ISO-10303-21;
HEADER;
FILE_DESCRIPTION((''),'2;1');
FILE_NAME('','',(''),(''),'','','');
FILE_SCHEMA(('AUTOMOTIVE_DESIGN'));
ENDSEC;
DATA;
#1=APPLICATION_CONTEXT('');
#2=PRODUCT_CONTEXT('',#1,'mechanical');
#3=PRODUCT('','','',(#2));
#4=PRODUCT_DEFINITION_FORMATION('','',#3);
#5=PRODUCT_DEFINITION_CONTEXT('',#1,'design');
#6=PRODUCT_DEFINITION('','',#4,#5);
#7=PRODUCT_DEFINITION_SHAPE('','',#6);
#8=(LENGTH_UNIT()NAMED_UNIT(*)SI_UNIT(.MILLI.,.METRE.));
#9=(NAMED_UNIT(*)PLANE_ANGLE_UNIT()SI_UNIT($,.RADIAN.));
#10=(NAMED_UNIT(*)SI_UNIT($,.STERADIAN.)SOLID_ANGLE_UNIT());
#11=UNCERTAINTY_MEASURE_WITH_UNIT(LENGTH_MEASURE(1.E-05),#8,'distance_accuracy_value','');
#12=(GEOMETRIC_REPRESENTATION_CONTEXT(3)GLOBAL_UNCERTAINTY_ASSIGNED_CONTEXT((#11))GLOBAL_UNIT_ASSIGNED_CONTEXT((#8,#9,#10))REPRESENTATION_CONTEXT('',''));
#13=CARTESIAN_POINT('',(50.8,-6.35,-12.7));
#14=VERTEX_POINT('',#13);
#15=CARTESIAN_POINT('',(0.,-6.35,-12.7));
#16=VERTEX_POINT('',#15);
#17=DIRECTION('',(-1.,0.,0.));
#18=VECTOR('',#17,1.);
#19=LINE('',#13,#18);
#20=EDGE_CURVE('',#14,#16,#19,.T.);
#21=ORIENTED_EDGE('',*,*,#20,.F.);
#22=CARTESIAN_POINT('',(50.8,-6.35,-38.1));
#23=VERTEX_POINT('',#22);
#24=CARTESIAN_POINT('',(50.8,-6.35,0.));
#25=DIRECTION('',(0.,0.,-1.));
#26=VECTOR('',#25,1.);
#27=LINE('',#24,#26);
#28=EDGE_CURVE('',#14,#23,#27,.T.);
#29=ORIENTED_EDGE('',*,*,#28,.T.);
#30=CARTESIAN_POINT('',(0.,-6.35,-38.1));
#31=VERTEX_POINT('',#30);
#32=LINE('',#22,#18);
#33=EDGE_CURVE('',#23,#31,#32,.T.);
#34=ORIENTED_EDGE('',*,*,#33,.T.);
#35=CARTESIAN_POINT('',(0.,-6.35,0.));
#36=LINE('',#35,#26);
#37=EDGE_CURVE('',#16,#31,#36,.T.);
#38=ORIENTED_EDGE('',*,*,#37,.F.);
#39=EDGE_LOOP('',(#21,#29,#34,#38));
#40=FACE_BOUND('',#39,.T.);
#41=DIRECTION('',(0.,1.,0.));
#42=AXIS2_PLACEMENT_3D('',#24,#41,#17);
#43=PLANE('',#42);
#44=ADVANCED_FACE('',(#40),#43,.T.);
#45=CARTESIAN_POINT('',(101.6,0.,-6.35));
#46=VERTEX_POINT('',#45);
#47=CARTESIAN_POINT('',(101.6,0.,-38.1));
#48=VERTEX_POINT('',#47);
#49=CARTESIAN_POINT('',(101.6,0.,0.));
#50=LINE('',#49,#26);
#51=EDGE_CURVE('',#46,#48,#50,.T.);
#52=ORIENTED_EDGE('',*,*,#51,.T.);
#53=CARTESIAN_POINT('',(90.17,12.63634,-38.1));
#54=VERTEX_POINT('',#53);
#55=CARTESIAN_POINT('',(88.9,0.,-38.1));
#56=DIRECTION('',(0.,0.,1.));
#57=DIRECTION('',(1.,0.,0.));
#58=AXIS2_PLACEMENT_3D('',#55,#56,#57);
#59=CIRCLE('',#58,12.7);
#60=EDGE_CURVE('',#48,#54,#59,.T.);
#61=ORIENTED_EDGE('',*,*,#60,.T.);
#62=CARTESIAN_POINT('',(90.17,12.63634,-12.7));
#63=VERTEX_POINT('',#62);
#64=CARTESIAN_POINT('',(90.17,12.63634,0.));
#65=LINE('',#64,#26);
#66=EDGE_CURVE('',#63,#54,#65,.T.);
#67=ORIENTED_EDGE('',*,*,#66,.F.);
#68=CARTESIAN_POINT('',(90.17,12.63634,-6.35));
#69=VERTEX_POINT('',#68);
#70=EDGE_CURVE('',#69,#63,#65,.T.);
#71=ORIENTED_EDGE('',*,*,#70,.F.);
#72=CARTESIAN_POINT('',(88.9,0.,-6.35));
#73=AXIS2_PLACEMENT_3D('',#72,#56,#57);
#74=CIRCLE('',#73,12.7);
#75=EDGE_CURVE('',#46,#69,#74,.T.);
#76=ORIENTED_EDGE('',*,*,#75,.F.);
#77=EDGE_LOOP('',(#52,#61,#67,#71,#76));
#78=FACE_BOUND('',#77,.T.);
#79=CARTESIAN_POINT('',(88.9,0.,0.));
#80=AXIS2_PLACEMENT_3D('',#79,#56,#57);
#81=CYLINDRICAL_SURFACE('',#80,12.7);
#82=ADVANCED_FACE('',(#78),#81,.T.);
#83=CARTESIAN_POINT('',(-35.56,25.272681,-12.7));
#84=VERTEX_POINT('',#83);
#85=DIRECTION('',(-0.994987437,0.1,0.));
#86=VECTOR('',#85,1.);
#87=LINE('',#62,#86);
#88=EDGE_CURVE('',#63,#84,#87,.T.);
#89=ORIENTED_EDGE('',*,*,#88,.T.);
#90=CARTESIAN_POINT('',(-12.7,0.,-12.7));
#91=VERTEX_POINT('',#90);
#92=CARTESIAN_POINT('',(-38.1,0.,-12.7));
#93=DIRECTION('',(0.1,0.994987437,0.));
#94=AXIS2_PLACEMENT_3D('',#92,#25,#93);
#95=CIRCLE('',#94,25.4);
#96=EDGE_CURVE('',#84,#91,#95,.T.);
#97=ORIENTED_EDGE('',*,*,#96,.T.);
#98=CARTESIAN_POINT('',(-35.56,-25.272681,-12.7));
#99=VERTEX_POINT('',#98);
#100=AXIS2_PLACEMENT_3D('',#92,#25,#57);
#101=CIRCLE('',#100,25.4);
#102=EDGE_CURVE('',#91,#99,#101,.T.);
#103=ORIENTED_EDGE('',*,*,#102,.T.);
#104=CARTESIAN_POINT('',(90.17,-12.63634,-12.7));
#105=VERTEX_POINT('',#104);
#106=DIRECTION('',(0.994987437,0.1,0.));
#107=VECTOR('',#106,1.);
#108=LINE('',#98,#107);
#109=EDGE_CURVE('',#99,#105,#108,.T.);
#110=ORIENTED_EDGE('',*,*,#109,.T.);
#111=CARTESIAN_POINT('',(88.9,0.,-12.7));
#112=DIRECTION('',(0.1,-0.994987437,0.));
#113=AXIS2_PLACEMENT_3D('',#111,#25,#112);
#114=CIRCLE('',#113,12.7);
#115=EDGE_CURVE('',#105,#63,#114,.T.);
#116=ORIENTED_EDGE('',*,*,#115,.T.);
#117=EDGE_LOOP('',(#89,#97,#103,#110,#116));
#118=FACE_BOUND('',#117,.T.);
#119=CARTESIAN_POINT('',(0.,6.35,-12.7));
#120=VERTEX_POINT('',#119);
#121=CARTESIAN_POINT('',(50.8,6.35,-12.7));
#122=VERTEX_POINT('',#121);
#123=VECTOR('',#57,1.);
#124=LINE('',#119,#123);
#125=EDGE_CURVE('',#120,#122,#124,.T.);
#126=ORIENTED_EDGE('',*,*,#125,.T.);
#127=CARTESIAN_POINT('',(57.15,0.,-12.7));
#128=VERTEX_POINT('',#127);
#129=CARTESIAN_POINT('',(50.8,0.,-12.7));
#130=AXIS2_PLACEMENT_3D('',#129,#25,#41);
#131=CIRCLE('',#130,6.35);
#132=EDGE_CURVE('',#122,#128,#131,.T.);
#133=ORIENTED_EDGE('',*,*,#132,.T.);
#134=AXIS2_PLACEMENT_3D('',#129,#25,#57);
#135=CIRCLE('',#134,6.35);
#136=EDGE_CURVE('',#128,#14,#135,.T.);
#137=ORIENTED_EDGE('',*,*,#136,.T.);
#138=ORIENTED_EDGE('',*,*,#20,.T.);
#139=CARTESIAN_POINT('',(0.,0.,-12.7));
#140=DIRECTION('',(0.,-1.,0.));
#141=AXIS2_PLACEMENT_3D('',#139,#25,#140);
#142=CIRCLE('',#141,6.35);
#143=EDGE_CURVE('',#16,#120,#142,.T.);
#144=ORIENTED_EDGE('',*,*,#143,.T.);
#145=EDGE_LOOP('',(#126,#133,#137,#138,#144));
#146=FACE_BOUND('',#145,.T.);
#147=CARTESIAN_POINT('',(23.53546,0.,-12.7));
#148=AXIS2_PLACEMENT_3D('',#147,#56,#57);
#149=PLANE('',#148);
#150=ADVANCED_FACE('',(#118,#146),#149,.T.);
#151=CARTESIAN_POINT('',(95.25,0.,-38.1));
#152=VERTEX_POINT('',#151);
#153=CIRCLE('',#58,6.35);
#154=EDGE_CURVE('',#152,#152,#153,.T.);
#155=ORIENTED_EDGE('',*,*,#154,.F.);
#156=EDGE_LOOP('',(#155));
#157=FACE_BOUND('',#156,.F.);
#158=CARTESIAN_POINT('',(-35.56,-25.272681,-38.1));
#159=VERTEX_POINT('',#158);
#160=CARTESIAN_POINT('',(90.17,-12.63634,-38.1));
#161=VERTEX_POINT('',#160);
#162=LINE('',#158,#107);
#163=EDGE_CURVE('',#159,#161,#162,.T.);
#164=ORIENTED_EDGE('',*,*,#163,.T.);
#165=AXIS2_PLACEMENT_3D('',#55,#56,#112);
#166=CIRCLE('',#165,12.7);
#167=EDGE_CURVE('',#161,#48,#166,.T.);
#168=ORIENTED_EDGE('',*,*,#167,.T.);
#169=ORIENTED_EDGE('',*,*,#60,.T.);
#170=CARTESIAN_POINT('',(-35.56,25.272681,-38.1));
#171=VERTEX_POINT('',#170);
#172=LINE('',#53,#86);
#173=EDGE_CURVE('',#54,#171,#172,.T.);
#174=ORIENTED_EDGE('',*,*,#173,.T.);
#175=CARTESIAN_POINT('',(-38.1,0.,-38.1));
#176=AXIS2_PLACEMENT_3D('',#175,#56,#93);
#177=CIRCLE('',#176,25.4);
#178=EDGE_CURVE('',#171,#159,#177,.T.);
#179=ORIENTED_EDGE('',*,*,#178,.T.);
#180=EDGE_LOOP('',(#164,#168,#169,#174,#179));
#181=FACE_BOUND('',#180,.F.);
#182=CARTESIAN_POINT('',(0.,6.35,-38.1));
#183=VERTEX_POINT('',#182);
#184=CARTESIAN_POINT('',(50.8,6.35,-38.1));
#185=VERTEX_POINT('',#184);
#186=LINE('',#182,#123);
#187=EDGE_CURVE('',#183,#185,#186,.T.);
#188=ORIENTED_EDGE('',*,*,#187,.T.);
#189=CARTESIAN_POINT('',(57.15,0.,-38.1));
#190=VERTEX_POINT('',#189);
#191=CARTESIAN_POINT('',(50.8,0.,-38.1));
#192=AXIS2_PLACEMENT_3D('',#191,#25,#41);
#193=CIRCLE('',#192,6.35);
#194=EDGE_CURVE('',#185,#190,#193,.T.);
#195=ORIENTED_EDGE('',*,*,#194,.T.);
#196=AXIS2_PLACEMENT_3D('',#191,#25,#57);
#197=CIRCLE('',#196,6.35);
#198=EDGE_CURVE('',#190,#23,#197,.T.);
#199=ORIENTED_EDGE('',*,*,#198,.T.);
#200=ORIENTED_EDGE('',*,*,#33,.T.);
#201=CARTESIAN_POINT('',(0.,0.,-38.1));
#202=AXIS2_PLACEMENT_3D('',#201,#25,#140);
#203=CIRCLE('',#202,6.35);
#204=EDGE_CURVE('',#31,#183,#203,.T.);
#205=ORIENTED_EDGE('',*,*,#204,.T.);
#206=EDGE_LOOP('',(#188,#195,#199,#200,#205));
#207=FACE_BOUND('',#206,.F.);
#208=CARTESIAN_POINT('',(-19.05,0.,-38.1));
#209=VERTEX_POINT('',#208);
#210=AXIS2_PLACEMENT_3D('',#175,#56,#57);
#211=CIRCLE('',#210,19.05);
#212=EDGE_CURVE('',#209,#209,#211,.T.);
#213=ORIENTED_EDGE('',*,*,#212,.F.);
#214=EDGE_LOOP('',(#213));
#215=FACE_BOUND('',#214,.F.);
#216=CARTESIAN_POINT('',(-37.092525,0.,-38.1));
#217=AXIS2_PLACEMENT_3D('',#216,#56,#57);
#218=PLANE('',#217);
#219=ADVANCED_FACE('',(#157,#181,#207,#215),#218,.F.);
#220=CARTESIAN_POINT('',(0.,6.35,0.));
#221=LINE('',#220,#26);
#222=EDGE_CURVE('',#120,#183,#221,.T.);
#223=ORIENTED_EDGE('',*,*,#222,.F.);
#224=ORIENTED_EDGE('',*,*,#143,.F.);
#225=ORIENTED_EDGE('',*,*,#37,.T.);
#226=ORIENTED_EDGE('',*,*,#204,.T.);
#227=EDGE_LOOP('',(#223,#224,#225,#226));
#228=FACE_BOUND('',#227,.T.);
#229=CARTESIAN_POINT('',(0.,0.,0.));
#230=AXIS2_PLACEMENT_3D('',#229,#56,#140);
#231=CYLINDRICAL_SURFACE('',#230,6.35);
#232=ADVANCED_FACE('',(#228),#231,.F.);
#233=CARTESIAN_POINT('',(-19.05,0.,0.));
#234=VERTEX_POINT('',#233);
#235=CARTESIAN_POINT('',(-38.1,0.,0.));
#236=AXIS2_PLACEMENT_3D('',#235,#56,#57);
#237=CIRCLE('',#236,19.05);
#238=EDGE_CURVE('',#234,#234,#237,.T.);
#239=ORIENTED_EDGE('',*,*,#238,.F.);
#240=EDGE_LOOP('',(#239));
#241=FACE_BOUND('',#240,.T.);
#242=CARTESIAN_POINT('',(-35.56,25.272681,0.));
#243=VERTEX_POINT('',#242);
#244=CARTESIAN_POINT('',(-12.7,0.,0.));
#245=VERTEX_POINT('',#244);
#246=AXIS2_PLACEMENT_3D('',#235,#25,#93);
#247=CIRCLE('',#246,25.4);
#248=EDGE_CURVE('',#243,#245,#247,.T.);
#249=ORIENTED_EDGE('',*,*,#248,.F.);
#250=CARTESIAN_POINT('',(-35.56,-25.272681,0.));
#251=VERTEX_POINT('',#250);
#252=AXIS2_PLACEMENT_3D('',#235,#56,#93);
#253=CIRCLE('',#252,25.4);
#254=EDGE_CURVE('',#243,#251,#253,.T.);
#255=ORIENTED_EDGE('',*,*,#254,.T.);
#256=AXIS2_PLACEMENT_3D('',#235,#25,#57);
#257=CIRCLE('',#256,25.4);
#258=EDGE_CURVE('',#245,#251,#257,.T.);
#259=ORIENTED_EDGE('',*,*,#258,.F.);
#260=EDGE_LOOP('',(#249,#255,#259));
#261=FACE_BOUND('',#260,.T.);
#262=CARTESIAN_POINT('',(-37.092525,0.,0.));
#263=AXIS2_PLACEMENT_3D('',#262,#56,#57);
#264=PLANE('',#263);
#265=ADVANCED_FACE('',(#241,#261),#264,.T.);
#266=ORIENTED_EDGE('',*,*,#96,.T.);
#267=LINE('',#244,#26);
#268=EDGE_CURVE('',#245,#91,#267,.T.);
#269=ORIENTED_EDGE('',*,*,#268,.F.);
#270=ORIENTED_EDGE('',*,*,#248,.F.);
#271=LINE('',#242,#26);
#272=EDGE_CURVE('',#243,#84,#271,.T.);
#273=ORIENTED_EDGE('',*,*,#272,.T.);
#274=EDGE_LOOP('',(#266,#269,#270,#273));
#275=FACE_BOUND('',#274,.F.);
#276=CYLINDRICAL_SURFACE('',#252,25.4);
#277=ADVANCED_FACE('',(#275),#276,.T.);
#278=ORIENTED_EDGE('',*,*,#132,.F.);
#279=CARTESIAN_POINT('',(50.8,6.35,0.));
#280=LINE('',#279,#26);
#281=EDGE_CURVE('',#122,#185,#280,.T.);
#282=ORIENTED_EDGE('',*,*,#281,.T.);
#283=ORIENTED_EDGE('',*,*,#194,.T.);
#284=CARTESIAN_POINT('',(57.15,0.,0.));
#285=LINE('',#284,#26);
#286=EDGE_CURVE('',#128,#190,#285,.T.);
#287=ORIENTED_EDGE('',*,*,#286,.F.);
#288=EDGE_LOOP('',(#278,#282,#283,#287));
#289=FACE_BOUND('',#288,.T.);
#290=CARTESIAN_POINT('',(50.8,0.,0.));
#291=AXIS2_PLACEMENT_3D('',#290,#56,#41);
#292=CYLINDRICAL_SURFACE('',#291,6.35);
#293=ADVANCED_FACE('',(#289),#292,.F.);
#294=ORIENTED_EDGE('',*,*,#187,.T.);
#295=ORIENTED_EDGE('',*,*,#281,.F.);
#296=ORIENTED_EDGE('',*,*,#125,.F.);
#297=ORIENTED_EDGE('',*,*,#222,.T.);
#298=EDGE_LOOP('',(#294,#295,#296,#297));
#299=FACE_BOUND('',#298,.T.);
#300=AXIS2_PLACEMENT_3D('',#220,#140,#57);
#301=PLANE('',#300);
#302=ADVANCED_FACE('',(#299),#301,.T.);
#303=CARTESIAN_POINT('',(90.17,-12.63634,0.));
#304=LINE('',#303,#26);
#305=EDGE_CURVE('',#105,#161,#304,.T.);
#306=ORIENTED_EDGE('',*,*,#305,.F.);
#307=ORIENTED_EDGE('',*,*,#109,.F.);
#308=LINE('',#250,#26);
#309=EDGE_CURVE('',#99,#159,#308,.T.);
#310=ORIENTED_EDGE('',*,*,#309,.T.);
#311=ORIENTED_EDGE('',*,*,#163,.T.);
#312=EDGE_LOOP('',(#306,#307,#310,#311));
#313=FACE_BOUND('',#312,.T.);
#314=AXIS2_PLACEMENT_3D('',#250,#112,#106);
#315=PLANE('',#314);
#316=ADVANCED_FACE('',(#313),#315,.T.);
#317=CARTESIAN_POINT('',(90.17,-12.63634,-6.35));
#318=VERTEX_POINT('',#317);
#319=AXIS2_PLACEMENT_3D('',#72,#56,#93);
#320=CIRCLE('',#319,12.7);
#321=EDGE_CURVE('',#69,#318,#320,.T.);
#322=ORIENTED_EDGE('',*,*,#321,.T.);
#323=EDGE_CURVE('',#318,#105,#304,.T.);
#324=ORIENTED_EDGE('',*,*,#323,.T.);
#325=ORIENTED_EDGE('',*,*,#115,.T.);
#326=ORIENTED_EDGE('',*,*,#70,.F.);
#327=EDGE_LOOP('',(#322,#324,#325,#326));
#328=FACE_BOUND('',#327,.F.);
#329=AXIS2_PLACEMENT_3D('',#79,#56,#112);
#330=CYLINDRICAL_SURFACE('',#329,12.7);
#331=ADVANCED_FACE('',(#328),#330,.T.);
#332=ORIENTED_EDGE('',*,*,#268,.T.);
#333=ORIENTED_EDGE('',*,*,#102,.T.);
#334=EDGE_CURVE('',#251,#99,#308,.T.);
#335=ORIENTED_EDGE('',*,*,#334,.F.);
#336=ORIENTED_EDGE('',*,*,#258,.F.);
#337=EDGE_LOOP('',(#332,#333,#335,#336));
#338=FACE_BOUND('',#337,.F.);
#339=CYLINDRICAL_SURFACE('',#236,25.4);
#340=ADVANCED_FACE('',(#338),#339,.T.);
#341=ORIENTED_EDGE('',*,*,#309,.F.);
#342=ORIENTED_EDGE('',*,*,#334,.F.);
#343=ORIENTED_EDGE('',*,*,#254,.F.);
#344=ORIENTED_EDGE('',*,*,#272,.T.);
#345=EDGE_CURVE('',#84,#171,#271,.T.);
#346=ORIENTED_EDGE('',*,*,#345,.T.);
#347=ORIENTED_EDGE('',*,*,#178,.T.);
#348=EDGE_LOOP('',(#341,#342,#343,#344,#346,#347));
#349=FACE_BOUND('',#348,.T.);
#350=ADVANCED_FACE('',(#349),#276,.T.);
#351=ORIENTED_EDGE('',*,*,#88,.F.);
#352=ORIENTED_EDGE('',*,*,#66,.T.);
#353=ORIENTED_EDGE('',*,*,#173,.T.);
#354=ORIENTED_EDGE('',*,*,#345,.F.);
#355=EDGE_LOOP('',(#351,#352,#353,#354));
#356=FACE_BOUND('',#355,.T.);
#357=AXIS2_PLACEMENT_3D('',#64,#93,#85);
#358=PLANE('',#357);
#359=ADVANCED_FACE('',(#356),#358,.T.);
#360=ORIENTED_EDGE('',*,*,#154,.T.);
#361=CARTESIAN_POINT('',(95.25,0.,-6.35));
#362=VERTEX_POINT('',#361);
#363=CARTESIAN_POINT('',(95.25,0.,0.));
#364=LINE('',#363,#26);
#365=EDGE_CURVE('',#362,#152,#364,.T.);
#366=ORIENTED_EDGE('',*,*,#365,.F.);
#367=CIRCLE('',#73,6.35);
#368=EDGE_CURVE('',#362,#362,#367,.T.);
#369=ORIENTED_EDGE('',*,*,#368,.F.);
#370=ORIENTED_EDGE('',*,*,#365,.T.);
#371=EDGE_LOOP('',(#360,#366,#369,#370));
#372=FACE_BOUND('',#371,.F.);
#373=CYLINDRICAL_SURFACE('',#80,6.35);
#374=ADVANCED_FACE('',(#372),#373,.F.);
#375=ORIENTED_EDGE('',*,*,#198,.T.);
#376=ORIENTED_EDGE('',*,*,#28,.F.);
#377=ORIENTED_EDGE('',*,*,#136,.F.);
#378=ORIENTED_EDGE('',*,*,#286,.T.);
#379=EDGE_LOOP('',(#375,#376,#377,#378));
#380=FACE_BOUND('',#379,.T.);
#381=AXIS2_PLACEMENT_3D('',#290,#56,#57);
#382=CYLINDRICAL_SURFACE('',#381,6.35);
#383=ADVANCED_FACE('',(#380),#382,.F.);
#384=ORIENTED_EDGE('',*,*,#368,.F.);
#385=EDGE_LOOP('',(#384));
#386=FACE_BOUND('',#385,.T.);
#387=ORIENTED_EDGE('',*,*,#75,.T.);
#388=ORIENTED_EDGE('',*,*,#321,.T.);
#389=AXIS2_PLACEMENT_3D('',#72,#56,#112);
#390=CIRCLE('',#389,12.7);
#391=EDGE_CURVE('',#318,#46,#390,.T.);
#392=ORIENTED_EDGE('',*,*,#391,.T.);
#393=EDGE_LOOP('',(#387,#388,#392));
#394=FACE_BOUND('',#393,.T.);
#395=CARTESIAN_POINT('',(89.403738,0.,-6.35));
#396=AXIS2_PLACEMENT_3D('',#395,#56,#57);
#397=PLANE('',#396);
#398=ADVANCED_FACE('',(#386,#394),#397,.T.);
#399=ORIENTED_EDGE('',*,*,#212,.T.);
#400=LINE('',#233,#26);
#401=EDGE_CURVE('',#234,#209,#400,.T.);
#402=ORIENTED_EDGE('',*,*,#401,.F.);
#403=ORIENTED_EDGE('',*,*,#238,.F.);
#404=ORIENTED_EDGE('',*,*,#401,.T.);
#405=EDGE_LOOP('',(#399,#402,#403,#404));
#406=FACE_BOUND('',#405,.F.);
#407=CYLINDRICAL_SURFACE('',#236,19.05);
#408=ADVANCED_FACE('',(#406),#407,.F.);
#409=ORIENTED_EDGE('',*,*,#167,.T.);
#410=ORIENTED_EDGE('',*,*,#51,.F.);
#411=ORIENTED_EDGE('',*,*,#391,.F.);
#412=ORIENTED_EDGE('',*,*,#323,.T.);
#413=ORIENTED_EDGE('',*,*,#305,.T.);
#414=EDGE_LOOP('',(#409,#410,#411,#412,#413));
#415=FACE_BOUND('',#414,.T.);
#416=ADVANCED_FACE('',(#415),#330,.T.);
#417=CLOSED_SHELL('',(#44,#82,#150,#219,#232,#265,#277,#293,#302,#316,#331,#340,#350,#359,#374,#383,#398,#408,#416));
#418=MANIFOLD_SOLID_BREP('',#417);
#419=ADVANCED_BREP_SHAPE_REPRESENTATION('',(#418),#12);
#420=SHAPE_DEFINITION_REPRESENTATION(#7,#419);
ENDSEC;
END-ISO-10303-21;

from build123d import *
from build123d import SkipClean  # not in build123d's __all__

# Parameters (mm, degrees)
F0_R     = 19.05
F0_R_2   = 6.35
F1_DEPTH = 38.1
F2_DEPTH = 12.7
F3_DEPTH = 6.35


with BuildPart() as f1:
    # F0 (on Top) → F1 (new body)
    with BuildSketch(Plane.XY):
        with BuildLine():
            ThreePointArc((-35.56, -25.2726809025), (-19.2628558428, -17.0388379885), (-12.7, 0))
            ThreePointArc((-12.7, 0), (-19.2628558428, 17.0388379885), (-35.56, 25.2726809025))
            ThreePointArc((-35.56, 25.2726809025), (-63.5, 0), (-35.56, -25.2726809025))
        make_face()
        with Locations((-38.1, 0)):
            Circle(F0_R, mode=Mode.SUBTRACT)
        with BuildLine():
            ThreePointArc((-35.56, 25.2726809025), (-19.2628558428, 17.0388379885), (-12.7, 0))
            ThreePointArc((-12.7, 0), (-19.2628558428, -17.0388379885), (-35.56, -25.2726809025))
            Line((-35.56, -25.2726809025), (90.17, -12.6363404513))
            ThreePointArc((90.17, -12.6363404513), (76.2, 0), (90.17, 12.6363404513))
            Line((90.17, 12.6363404513), (-35.56, 25.2726809025))
        make_face()
        with BuildLine():
            ThreePointArc((0, -6.35), (-6.35, 0), (0, 6.35))
            Line((0, 6.35), (50.8, 6.35))
            ThreePointArc((50.8, 6.35), (55.2901280605, 4.4901280605), (57.15, 0))
            ThreePointArc((57.15, 0), (55.2901280605, -4.4901280605), (50.8, -6.35))
            Line((50.8, -6.35), (0, -6.35))
        make_face(mode=Mode.SUBTRACT)
        with BuildLine():
            ThreePointArc((101.6, 0), (98.3185720786, 8.5194189943), (90.17, 12.6363404513))
            ThreePointArc((90.17, 12.6363404513), (76.2, 0), (90.17, -12.6363404513))
            ThreePointArc((90.17, -12.6363404513), (98.3185720786, -8.5194189943), (101.6, 0))
        make_face()
        with Locations((88.9, 0)):
            Circle(F0_R_2, mode=Mode.SUBTRACT)
    extrude(amount=-F1_DEPTH)

    # F0 (on Top) → F2 (cut)
    with BuildSketch(Plane.XY):
        with BuildLine():
            ThreePointArc((-35.56, 25.2726809025), (-19.2628558428, 17.0388379885), (-12.7, 0))
            ThreePointArc((-12.7, 0), (-19.2628558428, -17.0388379885), (-35.56, -25.2726809025))
            Line((-35.56, -25.2726809025), (90.17, -12.6363404513))
            ThreePointArc((90.17, -12.6363404513), (76.2, 0), (90.17, 12.6363404513))
            Line((90.17, 12.6363404513), (-35.56, 25.2726809025))
        make_face()
        with BuildLine():
            ThreePointArc((0, -6.35), (-6.35, 0), (0, 6.35))
            Line((0, 6.35), (50.8, 6.35))
            ThreePointArc((50.8, 6.35), (55.2901280605, 4.4901280605), (57.15, 0))
            ThreePointArc((57.15, 0), (55.2901280605, -4.4901280605), (50.8, -6.35))
            Line((50.8, -6.35), (0, -6.35))
        make_face(mode=Mode.SUBTRACT)
    with SkipClean():  # cleaning this boolean's faces spoils the solid; the shape is the same uncleaned
        extrude(amount=-F2_DEPTH, mode=Mode.SUBTRACT)

    # F0 (on Top) → F3 (cut)
    with BuildSketch(Plane.XY):
        with BuildLine():
            ThreePointArc((101.6, 0), (98.3185720786, 8.5194189943), (90.17, 12.6363404513))
            ThreePointArc((90.17, 12.6363404513), (76.2, 0), (90.17, -12.6363404513))
            ThreePointArc((90.17, -12.6363404513), (98.3185720786, -8.5194189943), (101.6, 0))
        make_face()
        with Locations((88.9, 0)):
            Circle(F0_R_2, mode=Mode.SUBTRACT)
    extrude(amount=-F3_DEPTH, mode=Mode.SUBTRACT)


solid = f1.part
